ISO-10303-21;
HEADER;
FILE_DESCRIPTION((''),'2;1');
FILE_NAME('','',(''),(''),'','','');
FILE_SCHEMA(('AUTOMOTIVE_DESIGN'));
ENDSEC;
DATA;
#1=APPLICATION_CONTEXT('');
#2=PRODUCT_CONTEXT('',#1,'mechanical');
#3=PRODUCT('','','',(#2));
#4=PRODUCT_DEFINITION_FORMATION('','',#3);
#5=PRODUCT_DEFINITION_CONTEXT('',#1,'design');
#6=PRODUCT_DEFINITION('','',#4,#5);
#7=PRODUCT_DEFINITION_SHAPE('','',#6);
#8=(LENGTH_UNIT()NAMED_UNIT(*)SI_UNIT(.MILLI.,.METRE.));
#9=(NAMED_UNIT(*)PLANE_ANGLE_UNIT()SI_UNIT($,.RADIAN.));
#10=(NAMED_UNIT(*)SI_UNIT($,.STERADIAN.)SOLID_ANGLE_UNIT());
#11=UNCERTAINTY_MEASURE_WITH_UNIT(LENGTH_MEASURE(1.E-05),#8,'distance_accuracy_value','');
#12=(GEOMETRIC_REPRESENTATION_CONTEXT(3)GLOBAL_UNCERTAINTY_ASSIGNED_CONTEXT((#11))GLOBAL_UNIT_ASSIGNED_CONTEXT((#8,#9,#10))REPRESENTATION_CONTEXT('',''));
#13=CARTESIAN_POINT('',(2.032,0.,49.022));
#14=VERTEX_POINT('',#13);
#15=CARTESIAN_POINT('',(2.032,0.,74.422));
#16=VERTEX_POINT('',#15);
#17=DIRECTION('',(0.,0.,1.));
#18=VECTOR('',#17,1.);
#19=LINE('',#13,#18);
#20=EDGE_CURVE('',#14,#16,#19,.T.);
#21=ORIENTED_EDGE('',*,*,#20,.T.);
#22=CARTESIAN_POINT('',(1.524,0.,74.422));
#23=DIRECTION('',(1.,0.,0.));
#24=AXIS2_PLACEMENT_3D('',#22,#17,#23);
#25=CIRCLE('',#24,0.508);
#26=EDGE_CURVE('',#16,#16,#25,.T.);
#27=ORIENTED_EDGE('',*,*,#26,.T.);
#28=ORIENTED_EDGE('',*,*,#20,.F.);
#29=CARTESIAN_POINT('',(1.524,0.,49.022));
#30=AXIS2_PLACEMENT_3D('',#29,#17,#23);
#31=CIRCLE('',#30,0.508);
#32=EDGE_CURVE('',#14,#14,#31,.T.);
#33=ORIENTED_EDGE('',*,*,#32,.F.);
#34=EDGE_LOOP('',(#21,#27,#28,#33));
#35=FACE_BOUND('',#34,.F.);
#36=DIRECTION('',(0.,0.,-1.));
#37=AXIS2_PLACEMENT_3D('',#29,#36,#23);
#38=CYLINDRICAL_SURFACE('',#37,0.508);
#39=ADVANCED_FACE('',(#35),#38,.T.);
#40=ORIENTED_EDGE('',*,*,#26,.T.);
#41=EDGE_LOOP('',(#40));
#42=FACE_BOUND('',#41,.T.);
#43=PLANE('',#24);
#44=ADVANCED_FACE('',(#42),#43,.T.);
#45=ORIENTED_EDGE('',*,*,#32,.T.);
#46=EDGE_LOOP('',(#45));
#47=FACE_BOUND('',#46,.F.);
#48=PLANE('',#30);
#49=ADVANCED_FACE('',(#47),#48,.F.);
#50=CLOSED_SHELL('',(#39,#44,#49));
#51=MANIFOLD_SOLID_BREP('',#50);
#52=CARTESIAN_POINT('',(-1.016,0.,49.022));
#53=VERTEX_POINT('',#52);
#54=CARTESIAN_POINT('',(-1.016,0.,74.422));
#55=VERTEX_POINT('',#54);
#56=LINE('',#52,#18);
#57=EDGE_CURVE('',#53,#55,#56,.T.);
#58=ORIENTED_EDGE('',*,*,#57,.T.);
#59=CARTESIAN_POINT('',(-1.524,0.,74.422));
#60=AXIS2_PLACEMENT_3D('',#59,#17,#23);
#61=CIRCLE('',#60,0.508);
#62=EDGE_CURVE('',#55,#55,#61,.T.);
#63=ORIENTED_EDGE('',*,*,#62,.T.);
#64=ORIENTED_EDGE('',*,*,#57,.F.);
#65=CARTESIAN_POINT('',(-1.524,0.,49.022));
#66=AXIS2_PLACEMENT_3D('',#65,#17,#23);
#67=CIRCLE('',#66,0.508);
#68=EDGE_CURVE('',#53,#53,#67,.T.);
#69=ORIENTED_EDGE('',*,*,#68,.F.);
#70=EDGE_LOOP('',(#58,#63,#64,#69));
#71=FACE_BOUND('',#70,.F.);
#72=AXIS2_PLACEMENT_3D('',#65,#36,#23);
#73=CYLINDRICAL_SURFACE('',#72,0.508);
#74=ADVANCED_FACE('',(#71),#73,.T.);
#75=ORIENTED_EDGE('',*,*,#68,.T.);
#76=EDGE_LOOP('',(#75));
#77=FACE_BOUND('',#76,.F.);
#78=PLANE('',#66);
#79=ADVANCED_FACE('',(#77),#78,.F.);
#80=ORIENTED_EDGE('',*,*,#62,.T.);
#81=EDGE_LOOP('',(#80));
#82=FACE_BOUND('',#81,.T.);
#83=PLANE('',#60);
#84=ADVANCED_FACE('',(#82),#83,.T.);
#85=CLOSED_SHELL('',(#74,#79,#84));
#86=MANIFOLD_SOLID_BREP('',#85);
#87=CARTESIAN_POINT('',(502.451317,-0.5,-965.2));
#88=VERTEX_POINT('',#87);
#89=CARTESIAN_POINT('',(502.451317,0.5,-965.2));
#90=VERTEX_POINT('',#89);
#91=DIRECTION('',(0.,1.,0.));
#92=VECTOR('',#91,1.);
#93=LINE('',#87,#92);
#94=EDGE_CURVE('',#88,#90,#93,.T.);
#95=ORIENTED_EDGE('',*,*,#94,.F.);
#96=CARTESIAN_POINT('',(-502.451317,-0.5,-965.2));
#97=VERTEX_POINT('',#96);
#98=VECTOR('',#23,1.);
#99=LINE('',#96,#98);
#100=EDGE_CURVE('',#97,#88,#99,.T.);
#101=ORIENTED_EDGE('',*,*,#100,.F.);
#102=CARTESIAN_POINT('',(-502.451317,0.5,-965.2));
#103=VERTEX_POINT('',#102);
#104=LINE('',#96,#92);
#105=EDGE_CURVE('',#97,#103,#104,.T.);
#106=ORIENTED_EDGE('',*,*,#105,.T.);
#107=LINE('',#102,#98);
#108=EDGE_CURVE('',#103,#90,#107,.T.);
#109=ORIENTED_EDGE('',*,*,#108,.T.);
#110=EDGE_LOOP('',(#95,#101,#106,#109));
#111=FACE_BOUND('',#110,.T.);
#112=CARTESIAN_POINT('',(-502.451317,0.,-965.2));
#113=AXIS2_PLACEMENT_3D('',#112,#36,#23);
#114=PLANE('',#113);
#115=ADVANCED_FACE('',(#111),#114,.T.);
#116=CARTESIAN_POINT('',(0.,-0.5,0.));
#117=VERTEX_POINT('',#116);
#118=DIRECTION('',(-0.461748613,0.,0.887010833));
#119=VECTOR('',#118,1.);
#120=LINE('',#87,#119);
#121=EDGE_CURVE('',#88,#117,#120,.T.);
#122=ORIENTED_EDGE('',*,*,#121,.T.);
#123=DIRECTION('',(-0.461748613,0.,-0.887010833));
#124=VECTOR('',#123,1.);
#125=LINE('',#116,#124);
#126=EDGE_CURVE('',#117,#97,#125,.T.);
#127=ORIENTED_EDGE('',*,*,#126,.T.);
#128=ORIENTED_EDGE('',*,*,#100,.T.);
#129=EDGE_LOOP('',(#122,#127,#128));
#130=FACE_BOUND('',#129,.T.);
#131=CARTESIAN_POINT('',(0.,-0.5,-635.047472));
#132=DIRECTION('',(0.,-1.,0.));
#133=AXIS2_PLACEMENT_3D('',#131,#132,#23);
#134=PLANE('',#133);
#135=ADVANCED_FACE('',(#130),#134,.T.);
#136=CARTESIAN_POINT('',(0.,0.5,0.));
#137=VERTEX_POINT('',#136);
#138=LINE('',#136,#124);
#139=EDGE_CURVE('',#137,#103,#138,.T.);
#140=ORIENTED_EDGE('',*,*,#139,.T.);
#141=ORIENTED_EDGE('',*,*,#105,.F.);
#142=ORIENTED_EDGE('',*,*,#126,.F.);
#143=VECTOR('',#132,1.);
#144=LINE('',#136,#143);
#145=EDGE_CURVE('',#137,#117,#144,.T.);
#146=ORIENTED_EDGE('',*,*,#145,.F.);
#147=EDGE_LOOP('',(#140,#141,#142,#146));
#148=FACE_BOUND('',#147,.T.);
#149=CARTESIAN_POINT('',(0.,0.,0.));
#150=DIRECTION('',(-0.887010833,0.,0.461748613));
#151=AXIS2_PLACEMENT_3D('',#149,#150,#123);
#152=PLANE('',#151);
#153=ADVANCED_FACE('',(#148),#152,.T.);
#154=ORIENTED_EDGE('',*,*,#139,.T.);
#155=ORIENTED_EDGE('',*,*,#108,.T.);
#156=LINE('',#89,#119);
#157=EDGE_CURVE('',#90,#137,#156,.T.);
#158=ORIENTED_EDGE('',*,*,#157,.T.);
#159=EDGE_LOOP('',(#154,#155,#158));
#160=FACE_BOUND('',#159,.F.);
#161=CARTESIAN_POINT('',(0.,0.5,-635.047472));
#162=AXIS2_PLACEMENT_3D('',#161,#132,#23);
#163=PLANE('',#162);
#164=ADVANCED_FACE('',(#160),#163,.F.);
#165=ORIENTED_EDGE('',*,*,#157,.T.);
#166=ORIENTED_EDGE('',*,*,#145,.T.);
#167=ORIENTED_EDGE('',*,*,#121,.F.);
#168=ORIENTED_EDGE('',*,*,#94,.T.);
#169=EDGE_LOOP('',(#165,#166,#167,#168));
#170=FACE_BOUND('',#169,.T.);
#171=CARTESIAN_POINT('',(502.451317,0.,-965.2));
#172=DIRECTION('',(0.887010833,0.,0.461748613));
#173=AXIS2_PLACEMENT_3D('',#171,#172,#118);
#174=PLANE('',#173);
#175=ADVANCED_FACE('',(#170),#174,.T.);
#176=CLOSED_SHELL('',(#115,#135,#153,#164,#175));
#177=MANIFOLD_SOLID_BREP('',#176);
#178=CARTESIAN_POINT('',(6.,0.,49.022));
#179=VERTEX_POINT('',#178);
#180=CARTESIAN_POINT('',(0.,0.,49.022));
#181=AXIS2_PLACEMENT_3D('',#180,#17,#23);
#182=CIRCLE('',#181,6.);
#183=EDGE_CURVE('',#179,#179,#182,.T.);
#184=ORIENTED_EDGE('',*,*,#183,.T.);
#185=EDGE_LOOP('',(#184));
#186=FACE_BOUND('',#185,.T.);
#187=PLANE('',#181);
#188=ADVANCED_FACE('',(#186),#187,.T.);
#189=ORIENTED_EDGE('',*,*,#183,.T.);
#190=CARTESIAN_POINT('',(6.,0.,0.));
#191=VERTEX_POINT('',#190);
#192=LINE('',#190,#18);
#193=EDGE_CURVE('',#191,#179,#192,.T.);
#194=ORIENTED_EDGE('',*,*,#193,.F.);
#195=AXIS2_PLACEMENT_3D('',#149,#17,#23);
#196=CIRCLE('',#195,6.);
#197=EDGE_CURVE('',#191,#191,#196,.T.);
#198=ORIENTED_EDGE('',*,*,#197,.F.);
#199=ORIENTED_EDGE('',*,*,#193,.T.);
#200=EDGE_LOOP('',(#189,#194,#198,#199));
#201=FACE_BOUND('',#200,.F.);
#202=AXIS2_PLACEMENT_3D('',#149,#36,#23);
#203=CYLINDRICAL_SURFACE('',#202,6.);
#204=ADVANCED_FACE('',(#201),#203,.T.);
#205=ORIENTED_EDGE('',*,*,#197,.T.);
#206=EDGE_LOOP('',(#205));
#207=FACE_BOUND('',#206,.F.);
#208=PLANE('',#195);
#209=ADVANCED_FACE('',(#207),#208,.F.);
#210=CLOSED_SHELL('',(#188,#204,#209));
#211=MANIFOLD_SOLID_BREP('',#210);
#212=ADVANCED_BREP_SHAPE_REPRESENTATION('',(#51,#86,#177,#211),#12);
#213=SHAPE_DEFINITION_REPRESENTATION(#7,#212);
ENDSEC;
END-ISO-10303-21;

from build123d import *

# Parameters (mm, degrees)
F0_R     = 6
F1_DEPTH = 49.022
F2_R     = 0.508
F3_DEPTH = 25.4
F4_R     = 0.508
F5_DEPTH = 25.4
F7_DEPTH = 0.5
F9_DEPTH = 6.501


# Not quite as in the source:
# - a feature of the source that left no trace in its solid (it failed there, or was rolled back) is left out


with BuildPart() as f1:
    # F0 (on Top) → F1 (new body)
    with BuildSketch(Plane.XY):
        Circle(F0_R)
    extrude(amount=F1_DEPTH)

    # F8 (on face) → F9 (cut, through all)
    with BuildSketch(Plane.XZ.offset(0.5)):
        Polygon((108.475908637, 0), (38.0572463157, -73.1072899742), (366.4362130725, -703.9174159872), (858.39933024, -722.3438895265), align=None)
    extrude(amount=-F9_DEPTH, mode=Mode.SUBTRACT)


with BuildPart() as f3:
    # F2 (on face) → F3 (new body)
    with BuildSketch(Plane.XY.offset(49.022)):
        with Locations((-1.524, 0)):
            Circle(F2_R)
    extrude(amount=F3_DEPTH)


with BuildPart() as f5:
    # F4 (on face) → F5 (new body)
    with BuildSketch(Plane.XY.offset(49.022)):
        with Locations((1.524, 0)):
            Circle(F4_R)
    extrude(amount=F5_DEPTH)


with BuildPart() as f7:
    # F6 (on Front) → F7 (new body, symmetric)
    with BuildSketch(Plane.XZ):
        Polygon((502.4513171925, -965.2), (0, 0), (-502.4513171925, -965.2), align=None)
    extrude(amount=F7_DEPTH, both=True)


solid = Compound([f1.part, f3.part, f5.part, f7.part])
